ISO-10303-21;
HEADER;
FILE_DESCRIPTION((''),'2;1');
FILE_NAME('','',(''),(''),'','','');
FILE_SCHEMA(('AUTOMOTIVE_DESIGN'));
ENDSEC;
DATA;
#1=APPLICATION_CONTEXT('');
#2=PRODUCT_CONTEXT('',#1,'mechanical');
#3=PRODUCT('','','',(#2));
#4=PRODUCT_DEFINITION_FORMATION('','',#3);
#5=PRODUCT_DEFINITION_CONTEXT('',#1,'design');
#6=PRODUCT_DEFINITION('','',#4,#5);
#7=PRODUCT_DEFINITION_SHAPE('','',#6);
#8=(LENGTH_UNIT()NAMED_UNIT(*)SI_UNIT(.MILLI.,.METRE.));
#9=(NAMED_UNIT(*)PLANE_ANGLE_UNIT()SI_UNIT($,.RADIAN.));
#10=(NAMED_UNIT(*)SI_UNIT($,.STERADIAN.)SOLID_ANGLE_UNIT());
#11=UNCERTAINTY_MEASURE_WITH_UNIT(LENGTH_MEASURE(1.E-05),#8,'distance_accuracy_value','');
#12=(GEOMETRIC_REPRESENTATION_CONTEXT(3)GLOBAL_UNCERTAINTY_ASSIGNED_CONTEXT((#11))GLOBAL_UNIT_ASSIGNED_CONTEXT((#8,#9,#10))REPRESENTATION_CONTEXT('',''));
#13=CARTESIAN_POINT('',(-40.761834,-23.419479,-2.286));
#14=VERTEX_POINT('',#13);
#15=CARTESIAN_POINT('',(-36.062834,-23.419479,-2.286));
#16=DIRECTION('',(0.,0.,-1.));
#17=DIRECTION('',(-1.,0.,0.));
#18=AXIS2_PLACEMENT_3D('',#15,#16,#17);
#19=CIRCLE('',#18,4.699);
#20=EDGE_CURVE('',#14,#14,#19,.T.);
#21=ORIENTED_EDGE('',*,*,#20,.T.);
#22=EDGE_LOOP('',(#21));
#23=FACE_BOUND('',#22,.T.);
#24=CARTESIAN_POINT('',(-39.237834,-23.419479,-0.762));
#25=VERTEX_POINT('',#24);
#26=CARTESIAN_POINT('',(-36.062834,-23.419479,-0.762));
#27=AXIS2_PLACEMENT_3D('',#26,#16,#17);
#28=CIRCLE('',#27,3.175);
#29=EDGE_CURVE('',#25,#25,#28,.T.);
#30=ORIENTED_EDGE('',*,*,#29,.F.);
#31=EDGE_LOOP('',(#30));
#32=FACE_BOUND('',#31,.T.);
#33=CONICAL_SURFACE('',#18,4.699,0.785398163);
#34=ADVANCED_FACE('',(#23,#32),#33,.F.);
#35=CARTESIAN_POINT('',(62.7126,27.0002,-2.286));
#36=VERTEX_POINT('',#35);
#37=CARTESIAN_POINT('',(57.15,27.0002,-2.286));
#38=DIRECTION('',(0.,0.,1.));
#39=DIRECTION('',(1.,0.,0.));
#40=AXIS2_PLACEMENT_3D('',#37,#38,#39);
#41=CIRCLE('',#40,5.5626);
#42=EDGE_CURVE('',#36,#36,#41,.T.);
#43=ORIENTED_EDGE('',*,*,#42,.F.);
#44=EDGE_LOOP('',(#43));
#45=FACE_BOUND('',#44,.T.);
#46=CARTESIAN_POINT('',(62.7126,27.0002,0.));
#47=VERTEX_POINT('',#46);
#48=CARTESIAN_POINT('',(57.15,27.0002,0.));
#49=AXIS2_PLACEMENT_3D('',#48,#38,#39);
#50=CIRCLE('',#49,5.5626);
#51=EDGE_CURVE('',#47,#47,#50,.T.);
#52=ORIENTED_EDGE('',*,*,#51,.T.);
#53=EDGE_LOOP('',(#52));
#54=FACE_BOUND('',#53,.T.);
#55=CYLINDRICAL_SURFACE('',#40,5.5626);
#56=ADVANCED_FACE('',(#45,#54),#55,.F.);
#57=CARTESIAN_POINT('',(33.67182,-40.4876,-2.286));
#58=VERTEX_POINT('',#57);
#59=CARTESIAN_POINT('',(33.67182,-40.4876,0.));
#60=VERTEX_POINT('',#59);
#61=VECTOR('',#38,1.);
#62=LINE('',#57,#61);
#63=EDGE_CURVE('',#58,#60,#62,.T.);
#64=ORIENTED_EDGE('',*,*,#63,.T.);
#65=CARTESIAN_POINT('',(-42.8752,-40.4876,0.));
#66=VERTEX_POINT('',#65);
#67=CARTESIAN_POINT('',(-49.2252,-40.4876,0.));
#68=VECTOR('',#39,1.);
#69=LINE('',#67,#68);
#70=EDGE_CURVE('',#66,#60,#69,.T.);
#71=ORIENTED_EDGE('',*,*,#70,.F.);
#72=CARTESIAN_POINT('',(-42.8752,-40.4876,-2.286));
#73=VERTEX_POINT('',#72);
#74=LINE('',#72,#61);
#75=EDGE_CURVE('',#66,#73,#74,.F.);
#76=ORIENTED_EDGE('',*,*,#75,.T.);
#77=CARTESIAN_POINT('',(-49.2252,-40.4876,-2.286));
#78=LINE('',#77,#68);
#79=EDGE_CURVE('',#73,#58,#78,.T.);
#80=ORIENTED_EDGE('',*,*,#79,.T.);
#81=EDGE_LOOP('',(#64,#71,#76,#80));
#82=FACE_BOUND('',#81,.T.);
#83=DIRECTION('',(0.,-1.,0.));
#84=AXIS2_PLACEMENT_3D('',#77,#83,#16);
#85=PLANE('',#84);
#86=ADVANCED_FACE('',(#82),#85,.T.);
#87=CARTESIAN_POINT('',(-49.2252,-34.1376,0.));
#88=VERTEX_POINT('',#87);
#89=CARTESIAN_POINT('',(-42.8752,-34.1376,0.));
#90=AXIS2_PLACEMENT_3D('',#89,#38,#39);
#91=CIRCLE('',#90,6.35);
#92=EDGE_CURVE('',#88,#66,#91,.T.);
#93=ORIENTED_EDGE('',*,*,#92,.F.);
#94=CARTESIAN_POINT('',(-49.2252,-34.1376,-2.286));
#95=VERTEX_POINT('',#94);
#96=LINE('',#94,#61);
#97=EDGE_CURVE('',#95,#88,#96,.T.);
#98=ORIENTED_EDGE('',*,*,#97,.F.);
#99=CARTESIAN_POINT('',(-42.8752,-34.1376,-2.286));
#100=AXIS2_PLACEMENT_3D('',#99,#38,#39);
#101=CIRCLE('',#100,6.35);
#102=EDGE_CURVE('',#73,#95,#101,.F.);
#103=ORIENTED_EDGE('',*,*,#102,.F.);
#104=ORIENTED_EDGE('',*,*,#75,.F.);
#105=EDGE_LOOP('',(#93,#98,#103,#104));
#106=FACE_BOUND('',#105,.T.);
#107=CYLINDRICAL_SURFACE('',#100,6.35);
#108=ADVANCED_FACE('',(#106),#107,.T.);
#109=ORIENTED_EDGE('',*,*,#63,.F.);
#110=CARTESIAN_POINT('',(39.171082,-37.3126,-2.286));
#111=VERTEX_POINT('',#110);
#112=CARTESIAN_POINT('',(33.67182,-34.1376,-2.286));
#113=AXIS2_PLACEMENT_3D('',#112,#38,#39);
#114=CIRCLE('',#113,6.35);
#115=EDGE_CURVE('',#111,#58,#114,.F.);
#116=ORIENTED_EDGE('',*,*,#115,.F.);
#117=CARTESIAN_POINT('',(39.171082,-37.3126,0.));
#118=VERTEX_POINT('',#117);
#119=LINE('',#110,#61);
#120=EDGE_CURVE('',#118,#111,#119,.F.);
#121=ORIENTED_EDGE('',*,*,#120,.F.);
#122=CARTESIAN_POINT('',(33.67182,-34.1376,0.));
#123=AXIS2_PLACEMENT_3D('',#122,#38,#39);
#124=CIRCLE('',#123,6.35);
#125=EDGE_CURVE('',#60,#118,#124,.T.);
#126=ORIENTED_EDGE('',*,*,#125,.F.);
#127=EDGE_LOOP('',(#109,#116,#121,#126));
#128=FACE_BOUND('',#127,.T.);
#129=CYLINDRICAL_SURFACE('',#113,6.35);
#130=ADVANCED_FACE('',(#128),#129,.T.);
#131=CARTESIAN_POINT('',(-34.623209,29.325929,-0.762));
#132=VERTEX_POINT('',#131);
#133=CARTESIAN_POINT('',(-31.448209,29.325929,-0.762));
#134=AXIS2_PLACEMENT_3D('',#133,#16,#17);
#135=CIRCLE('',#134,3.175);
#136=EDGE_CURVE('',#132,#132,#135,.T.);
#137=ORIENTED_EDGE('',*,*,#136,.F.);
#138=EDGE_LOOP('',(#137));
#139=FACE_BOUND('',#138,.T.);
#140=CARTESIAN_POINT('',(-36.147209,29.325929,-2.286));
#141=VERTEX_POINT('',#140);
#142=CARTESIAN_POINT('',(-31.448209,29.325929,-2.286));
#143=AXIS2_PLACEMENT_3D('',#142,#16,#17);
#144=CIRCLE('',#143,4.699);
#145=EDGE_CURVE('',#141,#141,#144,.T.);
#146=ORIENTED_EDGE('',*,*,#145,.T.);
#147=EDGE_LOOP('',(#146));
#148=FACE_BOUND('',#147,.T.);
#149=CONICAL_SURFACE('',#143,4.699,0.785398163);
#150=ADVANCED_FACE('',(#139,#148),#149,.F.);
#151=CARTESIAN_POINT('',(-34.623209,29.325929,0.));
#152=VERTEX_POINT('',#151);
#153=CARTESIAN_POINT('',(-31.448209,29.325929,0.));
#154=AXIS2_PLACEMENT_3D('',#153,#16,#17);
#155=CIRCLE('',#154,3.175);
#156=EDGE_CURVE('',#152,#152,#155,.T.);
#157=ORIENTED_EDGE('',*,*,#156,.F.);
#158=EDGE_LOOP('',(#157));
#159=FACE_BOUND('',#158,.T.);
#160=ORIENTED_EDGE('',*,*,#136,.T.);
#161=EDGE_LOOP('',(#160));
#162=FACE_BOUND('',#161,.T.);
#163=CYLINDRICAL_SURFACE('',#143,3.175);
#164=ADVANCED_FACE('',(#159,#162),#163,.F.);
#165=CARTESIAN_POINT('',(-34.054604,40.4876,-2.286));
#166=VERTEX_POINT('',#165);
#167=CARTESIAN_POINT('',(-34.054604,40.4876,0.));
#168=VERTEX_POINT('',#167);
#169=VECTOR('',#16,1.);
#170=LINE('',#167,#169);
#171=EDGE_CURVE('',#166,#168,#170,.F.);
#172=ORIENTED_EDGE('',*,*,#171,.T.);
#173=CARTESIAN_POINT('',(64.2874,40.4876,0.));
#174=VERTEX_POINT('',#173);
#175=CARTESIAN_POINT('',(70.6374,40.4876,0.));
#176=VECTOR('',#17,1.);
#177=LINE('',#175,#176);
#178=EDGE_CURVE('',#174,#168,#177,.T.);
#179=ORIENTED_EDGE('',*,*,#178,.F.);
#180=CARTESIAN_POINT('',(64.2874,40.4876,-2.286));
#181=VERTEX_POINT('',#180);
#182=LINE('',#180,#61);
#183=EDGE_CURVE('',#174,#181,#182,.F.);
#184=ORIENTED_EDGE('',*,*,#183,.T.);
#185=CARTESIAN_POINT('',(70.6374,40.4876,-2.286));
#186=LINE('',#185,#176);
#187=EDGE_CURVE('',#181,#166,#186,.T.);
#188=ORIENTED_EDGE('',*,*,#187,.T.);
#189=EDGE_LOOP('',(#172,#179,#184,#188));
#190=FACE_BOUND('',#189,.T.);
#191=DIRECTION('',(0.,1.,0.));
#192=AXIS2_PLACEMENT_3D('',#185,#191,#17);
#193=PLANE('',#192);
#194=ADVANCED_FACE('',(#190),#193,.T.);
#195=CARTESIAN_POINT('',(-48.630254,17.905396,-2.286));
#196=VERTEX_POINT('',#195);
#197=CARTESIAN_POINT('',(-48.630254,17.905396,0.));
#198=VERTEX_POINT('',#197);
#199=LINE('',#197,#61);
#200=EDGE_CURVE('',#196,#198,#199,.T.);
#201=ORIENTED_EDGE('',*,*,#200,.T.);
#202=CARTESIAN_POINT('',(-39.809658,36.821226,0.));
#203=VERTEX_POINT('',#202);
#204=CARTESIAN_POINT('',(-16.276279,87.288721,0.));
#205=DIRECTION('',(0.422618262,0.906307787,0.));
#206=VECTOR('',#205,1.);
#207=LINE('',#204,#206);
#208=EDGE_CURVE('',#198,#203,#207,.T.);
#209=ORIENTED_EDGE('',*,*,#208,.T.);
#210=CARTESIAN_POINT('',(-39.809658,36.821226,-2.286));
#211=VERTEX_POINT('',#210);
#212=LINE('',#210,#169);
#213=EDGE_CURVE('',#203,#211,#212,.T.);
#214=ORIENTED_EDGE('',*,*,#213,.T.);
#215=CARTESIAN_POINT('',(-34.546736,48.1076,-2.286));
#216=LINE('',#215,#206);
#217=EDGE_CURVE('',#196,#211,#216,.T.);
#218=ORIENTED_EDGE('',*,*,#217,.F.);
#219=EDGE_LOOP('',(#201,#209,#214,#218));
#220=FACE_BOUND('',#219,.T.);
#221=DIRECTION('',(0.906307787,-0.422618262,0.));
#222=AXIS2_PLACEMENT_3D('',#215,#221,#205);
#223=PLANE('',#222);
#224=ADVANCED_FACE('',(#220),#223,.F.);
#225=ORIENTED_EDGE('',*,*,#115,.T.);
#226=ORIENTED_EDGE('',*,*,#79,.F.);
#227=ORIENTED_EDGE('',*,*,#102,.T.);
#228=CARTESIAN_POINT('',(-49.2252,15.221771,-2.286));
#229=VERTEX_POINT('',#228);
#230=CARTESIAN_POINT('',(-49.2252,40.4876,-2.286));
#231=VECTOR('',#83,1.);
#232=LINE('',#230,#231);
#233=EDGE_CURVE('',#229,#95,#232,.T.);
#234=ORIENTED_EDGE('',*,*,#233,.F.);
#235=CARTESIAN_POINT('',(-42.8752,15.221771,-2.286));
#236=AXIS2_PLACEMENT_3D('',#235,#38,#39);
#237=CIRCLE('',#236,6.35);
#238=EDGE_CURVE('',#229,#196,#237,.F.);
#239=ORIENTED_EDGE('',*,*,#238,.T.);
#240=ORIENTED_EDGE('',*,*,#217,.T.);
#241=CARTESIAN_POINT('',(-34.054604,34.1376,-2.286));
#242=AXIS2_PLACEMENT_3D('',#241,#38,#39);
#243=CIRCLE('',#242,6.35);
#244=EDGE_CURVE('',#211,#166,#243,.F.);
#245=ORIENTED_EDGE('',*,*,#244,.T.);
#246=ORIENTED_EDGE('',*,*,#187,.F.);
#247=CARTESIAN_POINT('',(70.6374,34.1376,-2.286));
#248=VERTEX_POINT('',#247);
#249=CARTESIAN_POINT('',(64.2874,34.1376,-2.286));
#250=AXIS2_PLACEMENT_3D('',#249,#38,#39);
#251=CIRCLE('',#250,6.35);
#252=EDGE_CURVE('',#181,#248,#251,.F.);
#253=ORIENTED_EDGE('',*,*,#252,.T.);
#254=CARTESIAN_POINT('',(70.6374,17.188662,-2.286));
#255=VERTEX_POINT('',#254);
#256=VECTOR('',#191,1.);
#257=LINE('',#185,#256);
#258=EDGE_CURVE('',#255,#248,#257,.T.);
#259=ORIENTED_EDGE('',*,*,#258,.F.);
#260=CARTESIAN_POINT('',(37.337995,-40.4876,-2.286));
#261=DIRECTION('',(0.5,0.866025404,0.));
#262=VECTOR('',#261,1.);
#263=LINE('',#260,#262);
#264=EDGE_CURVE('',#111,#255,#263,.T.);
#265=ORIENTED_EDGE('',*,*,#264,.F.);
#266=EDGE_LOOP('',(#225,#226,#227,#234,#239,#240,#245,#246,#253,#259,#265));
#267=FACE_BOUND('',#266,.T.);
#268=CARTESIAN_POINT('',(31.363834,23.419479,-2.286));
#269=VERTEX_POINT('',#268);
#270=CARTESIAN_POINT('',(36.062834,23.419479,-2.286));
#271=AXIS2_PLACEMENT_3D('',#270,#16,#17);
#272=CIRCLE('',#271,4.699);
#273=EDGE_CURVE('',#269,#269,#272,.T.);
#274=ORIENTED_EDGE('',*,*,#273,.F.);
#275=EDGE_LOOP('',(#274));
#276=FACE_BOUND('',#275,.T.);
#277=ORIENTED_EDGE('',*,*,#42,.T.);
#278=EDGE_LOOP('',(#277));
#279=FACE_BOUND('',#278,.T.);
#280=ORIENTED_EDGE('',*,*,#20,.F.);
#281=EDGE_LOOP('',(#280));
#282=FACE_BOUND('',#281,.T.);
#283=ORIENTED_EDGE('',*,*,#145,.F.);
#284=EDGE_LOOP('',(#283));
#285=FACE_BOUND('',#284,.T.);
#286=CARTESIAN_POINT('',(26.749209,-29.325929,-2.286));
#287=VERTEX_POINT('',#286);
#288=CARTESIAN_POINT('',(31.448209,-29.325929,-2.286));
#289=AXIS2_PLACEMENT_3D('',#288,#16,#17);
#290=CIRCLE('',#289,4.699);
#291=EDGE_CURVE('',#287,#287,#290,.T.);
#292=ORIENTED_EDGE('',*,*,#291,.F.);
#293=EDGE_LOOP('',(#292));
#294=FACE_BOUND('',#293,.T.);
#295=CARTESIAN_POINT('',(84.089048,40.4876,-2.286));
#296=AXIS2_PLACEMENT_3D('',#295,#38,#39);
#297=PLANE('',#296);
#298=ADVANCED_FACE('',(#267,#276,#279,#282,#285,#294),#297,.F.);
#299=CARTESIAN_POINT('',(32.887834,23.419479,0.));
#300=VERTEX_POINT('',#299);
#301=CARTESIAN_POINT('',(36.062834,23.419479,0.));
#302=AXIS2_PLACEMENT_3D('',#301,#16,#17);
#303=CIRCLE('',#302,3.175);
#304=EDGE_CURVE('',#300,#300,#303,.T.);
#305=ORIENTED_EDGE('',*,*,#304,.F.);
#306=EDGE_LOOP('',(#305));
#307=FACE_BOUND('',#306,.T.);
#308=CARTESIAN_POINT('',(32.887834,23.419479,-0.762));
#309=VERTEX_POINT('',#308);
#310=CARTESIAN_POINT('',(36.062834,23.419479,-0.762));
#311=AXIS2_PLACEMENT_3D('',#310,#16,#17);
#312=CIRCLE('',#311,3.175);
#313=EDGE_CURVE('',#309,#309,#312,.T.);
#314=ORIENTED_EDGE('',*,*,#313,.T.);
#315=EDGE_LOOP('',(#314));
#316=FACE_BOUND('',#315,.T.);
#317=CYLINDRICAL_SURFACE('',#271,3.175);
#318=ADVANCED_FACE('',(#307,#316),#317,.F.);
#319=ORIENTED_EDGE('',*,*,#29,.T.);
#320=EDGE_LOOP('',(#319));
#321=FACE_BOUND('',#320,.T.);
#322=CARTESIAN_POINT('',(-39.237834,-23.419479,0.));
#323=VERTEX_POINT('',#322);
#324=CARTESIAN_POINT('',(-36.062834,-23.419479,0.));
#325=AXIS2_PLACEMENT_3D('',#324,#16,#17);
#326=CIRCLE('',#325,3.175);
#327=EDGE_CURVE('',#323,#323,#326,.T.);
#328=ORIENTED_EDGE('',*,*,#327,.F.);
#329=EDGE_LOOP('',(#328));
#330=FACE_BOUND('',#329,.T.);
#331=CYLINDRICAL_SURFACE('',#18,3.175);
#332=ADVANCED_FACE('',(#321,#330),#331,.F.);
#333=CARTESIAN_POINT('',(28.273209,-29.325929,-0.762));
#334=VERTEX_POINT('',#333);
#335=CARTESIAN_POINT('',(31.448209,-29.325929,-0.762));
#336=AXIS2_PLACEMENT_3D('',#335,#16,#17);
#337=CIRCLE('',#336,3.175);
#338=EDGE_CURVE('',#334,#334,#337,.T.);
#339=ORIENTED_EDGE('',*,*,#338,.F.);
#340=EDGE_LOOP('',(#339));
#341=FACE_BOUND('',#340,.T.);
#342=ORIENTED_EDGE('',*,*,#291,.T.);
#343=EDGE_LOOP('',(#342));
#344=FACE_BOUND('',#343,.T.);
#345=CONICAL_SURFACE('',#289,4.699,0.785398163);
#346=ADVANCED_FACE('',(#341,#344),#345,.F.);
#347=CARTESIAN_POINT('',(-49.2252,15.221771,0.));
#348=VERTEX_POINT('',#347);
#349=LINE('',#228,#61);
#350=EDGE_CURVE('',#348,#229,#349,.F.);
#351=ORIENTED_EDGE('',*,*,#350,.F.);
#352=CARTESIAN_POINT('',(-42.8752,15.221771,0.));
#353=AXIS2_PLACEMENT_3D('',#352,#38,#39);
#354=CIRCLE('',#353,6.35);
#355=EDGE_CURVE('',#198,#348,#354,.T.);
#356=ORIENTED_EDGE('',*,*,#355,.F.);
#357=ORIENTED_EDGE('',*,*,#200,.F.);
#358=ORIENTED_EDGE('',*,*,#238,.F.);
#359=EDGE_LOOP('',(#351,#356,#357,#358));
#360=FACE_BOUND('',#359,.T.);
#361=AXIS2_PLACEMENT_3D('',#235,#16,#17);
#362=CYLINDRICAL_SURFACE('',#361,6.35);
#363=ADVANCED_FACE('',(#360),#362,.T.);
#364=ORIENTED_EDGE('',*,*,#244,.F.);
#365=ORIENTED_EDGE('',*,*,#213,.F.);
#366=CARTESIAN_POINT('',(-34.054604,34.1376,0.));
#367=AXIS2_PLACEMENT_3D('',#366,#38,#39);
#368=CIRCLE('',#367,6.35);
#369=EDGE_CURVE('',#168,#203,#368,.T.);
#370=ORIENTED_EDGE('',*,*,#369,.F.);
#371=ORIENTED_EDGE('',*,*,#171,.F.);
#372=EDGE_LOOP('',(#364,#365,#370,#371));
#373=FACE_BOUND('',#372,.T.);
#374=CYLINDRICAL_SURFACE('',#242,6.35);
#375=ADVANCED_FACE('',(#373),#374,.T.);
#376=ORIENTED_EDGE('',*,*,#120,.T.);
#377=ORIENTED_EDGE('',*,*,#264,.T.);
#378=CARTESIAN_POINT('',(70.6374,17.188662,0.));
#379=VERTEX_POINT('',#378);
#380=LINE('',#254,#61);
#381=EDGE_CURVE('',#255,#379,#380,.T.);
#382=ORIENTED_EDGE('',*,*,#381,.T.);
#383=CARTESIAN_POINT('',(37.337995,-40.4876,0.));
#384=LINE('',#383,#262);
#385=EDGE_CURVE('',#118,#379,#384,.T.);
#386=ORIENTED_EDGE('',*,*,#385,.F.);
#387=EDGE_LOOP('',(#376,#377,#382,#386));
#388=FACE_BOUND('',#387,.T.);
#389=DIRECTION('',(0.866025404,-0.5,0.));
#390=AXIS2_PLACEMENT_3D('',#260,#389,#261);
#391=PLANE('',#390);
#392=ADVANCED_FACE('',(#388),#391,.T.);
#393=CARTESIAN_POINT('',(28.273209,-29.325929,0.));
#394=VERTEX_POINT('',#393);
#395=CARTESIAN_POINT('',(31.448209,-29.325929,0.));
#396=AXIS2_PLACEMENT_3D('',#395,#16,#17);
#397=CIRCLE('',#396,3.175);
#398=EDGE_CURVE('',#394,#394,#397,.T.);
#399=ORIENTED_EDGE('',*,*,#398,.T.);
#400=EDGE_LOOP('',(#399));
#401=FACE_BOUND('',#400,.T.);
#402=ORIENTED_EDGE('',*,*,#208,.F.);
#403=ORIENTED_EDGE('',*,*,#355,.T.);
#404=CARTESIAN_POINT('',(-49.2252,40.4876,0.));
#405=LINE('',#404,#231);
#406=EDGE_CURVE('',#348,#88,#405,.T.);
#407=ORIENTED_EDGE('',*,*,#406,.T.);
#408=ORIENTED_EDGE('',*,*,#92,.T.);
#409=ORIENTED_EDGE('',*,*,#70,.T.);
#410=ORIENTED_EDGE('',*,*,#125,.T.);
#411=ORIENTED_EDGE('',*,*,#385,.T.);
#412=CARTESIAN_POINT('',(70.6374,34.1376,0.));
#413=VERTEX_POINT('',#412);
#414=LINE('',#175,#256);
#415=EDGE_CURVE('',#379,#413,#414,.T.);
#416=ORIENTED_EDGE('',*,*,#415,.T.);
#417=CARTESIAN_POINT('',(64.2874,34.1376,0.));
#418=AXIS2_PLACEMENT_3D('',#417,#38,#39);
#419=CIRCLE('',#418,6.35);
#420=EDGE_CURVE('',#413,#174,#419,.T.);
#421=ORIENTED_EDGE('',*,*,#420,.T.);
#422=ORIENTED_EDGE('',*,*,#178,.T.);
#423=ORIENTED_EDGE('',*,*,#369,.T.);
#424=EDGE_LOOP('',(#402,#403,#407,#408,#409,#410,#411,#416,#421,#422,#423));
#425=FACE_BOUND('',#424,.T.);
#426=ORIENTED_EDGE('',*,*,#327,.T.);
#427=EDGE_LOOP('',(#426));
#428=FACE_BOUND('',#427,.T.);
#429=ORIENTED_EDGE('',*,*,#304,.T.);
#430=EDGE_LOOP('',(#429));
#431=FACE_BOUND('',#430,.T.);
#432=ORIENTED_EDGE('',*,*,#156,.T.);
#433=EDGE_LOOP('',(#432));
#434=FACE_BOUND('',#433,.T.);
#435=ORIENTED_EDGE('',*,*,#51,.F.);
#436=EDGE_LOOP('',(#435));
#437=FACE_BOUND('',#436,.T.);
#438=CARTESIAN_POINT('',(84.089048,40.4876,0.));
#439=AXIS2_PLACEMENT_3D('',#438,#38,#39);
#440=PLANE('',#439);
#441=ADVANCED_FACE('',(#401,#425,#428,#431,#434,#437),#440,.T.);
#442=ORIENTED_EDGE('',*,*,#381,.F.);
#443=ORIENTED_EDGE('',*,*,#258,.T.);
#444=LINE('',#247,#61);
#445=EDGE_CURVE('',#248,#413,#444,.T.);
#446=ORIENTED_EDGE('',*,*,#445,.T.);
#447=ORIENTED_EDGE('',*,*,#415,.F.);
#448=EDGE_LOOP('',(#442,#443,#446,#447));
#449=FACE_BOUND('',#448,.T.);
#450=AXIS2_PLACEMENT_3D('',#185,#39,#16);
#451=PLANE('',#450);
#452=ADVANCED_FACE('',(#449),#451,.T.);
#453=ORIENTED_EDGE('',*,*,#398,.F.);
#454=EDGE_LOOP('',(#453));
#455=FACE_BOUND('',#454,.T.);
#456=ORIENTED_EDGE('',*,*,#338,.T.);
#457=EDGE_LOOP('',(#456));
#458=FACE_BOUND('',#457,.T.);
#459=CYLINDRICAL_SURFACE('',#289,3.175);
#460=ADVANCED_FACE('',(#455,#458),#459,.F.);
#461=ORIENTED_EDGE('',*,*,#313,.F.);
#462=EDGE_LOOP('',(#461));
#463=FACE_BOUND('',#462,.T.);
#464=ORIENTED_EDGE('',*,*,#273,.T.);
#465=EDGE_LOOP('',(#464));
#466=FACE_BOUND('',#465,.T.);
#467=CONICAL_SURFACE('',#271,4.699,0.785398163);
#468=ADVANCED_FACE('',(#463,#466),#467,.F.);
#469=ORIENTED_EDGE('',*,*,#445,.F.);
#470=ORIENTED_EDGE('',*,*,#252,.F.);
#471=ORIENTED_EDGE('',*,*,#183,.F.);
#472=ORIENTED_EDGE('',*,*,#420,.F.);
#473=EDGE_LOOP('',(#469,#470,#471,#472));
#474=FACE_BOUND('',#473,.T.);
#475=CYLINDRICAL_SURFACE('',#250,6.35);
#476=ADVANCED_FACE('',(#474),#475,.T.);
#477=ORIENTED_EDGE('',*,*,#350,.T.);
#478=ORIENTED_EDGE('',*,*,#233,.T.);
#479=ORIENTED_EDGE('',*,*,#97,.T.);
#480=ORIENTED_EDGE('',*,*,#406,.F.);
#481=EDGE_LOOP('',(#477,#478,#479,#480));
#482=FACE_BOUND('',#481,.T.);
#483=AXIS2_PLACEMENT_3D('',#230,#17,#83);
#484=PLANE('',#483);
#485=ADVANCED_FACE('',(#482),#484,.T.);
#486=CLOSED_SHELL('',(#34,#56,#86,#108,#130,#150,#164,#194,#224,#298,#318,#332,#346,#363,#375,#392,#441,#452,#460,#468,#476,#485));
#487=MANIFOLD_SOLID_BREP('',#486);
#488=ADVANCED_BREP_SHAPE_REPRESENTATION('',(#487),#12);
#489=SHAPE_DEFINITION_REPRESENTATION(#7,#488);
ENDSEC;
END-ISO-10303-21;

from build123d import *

# Parameters (mm, degrees)
SKETCH11_R                        = 5.5626
BASE_FLANGE1_DEPTH                = 2.286
CSK_FOR_M4_FH_MODIFIED_AT_2_COUNT = 2
CSK_FOR_M4_FH_MODIFIED_AT_2_PITCH = 67.76892481
CSK_FOR_M4_FH_MODIFIED_AT_3_COUNT = 2
CSK_FOR_M4_FH_MODIFIED_AT_3_PITCH = 86
CSK_FOR_M4_FH_MODIFIED_AT_4_COUNT = 2
CSK_FOR_M4_FH_MODIFIED_AT_4_PITCH = 52.946886878
CUT_EXTRUDE1_DEPTH                = 82.450069543
FILLET1_R                         = 6.35


# Sheet-metal steps are written as plain solids
with BuildPart() as part:
    # Sketch11 → Base-Flange1 (new body)
    with BuildSketch(Plane.XY):
        Polygon((-49.2252, 40.4876), (-49.2252, -40.4876), (37.337994573, -40.4876), (70.6374, 17.188662062), (70.6374, 40.4876), align=None)
        with Locations((57.15, 27.0002)):
            Circle(SKETCH11_R, mode=Mode.SUBTRACT)
    extrude(amount=-BASE_FLANGE1_DEPTH)

    # Sketch15 → CSK for M4 FH Modified (revolve, cut)
    with BuildSketch(Plane(origin=(36.062834422, 23.419478506, -2.286), x_dir=(0, 1, 0), z_dir=(1, 0, 0))):
        Polygon((0, 0), (0, 2.286), (3.175, 2.286), (3.175, 1.524), (4.699, 0), align=None)
    csk_for_m4_fh_modified = revolve(axis=Axis((36.062834422, 23.419478506, -8.636), (0, 0, 1)), mode=Mode.SUBTRACT)

    # CSK for M4 FH Modified at 2: CSK for M4 FH Modified ×2
    with Locations(*[Vector(-0.9961946980917455, 0.08715574274765803, 0) * (i * CSK_FOR_M4_FH_MODIFIED_AT_2_PITCH) for i in range(1, CSK_FOR_M4_FH_MODIFIED_AT_2_COUNT)]):
        add(csk_for_m4_fh_modified, mode=Mode.SUBTRACT)

    # CSK for M4 FH Modified at 3: CSK for M4 FH Modified ×2
    with Locations(*[Vector(-0.838670567945423, -0.5446390350150286, 0) * (i * CSK_FOR_M4_FH_MODIFIED_AT_3_PITCH) for i in range(1, CSK_FOR_M4_FH_MODIFIED_AT_3_COUNT)]):
        add(csk_for_m4_fh_modified, mode=Mode.SUBTRACT)

    # CSK for M4 FH Modified at 4: CSK for M4 FH Modified ×2
    with Locations(*[Vector(-0.08715574274765796, -0.9961946980917455, 0) * (i * CSK_FOR_M4_FH_MODIFIED_AT_4_PITCH) for i in range(1, CSK_FOR_M4_FH_MODIFIED_AT_4_COUNT)]):
        add(csk_for_m4_fh_modified, mode=Mode.SUBTRACT)

    # Sketch17 → Cut-Extrude1 (cut, through all)
    with BuildSketch(Plane.XY):
        Polygon((-34.546735645, 48.1076), (-56.8452, 0.288388874), (-56.8452, 48.1076), align=None)
    extrude(amount=-CUT_EXTRUDE1_DEPTH, mode=Mode.SUBTRACT)

    # Fillet1
    fillet1_edges = [part.edges().sort_by_distance(p)[0] for p in [
        (-49.2252, 16.629531608, -1.143),
        (-38.1, 40.4876, -1.143),
        (37.337994573, -40.4876, -1.143),
        (-49.2252, -40.4876, -1.143),
        (70.6374, 40.4876, -1.143),
    ]]
    fillet(fillet1_edges, radius=FILLET1_R)


solid = part.part
